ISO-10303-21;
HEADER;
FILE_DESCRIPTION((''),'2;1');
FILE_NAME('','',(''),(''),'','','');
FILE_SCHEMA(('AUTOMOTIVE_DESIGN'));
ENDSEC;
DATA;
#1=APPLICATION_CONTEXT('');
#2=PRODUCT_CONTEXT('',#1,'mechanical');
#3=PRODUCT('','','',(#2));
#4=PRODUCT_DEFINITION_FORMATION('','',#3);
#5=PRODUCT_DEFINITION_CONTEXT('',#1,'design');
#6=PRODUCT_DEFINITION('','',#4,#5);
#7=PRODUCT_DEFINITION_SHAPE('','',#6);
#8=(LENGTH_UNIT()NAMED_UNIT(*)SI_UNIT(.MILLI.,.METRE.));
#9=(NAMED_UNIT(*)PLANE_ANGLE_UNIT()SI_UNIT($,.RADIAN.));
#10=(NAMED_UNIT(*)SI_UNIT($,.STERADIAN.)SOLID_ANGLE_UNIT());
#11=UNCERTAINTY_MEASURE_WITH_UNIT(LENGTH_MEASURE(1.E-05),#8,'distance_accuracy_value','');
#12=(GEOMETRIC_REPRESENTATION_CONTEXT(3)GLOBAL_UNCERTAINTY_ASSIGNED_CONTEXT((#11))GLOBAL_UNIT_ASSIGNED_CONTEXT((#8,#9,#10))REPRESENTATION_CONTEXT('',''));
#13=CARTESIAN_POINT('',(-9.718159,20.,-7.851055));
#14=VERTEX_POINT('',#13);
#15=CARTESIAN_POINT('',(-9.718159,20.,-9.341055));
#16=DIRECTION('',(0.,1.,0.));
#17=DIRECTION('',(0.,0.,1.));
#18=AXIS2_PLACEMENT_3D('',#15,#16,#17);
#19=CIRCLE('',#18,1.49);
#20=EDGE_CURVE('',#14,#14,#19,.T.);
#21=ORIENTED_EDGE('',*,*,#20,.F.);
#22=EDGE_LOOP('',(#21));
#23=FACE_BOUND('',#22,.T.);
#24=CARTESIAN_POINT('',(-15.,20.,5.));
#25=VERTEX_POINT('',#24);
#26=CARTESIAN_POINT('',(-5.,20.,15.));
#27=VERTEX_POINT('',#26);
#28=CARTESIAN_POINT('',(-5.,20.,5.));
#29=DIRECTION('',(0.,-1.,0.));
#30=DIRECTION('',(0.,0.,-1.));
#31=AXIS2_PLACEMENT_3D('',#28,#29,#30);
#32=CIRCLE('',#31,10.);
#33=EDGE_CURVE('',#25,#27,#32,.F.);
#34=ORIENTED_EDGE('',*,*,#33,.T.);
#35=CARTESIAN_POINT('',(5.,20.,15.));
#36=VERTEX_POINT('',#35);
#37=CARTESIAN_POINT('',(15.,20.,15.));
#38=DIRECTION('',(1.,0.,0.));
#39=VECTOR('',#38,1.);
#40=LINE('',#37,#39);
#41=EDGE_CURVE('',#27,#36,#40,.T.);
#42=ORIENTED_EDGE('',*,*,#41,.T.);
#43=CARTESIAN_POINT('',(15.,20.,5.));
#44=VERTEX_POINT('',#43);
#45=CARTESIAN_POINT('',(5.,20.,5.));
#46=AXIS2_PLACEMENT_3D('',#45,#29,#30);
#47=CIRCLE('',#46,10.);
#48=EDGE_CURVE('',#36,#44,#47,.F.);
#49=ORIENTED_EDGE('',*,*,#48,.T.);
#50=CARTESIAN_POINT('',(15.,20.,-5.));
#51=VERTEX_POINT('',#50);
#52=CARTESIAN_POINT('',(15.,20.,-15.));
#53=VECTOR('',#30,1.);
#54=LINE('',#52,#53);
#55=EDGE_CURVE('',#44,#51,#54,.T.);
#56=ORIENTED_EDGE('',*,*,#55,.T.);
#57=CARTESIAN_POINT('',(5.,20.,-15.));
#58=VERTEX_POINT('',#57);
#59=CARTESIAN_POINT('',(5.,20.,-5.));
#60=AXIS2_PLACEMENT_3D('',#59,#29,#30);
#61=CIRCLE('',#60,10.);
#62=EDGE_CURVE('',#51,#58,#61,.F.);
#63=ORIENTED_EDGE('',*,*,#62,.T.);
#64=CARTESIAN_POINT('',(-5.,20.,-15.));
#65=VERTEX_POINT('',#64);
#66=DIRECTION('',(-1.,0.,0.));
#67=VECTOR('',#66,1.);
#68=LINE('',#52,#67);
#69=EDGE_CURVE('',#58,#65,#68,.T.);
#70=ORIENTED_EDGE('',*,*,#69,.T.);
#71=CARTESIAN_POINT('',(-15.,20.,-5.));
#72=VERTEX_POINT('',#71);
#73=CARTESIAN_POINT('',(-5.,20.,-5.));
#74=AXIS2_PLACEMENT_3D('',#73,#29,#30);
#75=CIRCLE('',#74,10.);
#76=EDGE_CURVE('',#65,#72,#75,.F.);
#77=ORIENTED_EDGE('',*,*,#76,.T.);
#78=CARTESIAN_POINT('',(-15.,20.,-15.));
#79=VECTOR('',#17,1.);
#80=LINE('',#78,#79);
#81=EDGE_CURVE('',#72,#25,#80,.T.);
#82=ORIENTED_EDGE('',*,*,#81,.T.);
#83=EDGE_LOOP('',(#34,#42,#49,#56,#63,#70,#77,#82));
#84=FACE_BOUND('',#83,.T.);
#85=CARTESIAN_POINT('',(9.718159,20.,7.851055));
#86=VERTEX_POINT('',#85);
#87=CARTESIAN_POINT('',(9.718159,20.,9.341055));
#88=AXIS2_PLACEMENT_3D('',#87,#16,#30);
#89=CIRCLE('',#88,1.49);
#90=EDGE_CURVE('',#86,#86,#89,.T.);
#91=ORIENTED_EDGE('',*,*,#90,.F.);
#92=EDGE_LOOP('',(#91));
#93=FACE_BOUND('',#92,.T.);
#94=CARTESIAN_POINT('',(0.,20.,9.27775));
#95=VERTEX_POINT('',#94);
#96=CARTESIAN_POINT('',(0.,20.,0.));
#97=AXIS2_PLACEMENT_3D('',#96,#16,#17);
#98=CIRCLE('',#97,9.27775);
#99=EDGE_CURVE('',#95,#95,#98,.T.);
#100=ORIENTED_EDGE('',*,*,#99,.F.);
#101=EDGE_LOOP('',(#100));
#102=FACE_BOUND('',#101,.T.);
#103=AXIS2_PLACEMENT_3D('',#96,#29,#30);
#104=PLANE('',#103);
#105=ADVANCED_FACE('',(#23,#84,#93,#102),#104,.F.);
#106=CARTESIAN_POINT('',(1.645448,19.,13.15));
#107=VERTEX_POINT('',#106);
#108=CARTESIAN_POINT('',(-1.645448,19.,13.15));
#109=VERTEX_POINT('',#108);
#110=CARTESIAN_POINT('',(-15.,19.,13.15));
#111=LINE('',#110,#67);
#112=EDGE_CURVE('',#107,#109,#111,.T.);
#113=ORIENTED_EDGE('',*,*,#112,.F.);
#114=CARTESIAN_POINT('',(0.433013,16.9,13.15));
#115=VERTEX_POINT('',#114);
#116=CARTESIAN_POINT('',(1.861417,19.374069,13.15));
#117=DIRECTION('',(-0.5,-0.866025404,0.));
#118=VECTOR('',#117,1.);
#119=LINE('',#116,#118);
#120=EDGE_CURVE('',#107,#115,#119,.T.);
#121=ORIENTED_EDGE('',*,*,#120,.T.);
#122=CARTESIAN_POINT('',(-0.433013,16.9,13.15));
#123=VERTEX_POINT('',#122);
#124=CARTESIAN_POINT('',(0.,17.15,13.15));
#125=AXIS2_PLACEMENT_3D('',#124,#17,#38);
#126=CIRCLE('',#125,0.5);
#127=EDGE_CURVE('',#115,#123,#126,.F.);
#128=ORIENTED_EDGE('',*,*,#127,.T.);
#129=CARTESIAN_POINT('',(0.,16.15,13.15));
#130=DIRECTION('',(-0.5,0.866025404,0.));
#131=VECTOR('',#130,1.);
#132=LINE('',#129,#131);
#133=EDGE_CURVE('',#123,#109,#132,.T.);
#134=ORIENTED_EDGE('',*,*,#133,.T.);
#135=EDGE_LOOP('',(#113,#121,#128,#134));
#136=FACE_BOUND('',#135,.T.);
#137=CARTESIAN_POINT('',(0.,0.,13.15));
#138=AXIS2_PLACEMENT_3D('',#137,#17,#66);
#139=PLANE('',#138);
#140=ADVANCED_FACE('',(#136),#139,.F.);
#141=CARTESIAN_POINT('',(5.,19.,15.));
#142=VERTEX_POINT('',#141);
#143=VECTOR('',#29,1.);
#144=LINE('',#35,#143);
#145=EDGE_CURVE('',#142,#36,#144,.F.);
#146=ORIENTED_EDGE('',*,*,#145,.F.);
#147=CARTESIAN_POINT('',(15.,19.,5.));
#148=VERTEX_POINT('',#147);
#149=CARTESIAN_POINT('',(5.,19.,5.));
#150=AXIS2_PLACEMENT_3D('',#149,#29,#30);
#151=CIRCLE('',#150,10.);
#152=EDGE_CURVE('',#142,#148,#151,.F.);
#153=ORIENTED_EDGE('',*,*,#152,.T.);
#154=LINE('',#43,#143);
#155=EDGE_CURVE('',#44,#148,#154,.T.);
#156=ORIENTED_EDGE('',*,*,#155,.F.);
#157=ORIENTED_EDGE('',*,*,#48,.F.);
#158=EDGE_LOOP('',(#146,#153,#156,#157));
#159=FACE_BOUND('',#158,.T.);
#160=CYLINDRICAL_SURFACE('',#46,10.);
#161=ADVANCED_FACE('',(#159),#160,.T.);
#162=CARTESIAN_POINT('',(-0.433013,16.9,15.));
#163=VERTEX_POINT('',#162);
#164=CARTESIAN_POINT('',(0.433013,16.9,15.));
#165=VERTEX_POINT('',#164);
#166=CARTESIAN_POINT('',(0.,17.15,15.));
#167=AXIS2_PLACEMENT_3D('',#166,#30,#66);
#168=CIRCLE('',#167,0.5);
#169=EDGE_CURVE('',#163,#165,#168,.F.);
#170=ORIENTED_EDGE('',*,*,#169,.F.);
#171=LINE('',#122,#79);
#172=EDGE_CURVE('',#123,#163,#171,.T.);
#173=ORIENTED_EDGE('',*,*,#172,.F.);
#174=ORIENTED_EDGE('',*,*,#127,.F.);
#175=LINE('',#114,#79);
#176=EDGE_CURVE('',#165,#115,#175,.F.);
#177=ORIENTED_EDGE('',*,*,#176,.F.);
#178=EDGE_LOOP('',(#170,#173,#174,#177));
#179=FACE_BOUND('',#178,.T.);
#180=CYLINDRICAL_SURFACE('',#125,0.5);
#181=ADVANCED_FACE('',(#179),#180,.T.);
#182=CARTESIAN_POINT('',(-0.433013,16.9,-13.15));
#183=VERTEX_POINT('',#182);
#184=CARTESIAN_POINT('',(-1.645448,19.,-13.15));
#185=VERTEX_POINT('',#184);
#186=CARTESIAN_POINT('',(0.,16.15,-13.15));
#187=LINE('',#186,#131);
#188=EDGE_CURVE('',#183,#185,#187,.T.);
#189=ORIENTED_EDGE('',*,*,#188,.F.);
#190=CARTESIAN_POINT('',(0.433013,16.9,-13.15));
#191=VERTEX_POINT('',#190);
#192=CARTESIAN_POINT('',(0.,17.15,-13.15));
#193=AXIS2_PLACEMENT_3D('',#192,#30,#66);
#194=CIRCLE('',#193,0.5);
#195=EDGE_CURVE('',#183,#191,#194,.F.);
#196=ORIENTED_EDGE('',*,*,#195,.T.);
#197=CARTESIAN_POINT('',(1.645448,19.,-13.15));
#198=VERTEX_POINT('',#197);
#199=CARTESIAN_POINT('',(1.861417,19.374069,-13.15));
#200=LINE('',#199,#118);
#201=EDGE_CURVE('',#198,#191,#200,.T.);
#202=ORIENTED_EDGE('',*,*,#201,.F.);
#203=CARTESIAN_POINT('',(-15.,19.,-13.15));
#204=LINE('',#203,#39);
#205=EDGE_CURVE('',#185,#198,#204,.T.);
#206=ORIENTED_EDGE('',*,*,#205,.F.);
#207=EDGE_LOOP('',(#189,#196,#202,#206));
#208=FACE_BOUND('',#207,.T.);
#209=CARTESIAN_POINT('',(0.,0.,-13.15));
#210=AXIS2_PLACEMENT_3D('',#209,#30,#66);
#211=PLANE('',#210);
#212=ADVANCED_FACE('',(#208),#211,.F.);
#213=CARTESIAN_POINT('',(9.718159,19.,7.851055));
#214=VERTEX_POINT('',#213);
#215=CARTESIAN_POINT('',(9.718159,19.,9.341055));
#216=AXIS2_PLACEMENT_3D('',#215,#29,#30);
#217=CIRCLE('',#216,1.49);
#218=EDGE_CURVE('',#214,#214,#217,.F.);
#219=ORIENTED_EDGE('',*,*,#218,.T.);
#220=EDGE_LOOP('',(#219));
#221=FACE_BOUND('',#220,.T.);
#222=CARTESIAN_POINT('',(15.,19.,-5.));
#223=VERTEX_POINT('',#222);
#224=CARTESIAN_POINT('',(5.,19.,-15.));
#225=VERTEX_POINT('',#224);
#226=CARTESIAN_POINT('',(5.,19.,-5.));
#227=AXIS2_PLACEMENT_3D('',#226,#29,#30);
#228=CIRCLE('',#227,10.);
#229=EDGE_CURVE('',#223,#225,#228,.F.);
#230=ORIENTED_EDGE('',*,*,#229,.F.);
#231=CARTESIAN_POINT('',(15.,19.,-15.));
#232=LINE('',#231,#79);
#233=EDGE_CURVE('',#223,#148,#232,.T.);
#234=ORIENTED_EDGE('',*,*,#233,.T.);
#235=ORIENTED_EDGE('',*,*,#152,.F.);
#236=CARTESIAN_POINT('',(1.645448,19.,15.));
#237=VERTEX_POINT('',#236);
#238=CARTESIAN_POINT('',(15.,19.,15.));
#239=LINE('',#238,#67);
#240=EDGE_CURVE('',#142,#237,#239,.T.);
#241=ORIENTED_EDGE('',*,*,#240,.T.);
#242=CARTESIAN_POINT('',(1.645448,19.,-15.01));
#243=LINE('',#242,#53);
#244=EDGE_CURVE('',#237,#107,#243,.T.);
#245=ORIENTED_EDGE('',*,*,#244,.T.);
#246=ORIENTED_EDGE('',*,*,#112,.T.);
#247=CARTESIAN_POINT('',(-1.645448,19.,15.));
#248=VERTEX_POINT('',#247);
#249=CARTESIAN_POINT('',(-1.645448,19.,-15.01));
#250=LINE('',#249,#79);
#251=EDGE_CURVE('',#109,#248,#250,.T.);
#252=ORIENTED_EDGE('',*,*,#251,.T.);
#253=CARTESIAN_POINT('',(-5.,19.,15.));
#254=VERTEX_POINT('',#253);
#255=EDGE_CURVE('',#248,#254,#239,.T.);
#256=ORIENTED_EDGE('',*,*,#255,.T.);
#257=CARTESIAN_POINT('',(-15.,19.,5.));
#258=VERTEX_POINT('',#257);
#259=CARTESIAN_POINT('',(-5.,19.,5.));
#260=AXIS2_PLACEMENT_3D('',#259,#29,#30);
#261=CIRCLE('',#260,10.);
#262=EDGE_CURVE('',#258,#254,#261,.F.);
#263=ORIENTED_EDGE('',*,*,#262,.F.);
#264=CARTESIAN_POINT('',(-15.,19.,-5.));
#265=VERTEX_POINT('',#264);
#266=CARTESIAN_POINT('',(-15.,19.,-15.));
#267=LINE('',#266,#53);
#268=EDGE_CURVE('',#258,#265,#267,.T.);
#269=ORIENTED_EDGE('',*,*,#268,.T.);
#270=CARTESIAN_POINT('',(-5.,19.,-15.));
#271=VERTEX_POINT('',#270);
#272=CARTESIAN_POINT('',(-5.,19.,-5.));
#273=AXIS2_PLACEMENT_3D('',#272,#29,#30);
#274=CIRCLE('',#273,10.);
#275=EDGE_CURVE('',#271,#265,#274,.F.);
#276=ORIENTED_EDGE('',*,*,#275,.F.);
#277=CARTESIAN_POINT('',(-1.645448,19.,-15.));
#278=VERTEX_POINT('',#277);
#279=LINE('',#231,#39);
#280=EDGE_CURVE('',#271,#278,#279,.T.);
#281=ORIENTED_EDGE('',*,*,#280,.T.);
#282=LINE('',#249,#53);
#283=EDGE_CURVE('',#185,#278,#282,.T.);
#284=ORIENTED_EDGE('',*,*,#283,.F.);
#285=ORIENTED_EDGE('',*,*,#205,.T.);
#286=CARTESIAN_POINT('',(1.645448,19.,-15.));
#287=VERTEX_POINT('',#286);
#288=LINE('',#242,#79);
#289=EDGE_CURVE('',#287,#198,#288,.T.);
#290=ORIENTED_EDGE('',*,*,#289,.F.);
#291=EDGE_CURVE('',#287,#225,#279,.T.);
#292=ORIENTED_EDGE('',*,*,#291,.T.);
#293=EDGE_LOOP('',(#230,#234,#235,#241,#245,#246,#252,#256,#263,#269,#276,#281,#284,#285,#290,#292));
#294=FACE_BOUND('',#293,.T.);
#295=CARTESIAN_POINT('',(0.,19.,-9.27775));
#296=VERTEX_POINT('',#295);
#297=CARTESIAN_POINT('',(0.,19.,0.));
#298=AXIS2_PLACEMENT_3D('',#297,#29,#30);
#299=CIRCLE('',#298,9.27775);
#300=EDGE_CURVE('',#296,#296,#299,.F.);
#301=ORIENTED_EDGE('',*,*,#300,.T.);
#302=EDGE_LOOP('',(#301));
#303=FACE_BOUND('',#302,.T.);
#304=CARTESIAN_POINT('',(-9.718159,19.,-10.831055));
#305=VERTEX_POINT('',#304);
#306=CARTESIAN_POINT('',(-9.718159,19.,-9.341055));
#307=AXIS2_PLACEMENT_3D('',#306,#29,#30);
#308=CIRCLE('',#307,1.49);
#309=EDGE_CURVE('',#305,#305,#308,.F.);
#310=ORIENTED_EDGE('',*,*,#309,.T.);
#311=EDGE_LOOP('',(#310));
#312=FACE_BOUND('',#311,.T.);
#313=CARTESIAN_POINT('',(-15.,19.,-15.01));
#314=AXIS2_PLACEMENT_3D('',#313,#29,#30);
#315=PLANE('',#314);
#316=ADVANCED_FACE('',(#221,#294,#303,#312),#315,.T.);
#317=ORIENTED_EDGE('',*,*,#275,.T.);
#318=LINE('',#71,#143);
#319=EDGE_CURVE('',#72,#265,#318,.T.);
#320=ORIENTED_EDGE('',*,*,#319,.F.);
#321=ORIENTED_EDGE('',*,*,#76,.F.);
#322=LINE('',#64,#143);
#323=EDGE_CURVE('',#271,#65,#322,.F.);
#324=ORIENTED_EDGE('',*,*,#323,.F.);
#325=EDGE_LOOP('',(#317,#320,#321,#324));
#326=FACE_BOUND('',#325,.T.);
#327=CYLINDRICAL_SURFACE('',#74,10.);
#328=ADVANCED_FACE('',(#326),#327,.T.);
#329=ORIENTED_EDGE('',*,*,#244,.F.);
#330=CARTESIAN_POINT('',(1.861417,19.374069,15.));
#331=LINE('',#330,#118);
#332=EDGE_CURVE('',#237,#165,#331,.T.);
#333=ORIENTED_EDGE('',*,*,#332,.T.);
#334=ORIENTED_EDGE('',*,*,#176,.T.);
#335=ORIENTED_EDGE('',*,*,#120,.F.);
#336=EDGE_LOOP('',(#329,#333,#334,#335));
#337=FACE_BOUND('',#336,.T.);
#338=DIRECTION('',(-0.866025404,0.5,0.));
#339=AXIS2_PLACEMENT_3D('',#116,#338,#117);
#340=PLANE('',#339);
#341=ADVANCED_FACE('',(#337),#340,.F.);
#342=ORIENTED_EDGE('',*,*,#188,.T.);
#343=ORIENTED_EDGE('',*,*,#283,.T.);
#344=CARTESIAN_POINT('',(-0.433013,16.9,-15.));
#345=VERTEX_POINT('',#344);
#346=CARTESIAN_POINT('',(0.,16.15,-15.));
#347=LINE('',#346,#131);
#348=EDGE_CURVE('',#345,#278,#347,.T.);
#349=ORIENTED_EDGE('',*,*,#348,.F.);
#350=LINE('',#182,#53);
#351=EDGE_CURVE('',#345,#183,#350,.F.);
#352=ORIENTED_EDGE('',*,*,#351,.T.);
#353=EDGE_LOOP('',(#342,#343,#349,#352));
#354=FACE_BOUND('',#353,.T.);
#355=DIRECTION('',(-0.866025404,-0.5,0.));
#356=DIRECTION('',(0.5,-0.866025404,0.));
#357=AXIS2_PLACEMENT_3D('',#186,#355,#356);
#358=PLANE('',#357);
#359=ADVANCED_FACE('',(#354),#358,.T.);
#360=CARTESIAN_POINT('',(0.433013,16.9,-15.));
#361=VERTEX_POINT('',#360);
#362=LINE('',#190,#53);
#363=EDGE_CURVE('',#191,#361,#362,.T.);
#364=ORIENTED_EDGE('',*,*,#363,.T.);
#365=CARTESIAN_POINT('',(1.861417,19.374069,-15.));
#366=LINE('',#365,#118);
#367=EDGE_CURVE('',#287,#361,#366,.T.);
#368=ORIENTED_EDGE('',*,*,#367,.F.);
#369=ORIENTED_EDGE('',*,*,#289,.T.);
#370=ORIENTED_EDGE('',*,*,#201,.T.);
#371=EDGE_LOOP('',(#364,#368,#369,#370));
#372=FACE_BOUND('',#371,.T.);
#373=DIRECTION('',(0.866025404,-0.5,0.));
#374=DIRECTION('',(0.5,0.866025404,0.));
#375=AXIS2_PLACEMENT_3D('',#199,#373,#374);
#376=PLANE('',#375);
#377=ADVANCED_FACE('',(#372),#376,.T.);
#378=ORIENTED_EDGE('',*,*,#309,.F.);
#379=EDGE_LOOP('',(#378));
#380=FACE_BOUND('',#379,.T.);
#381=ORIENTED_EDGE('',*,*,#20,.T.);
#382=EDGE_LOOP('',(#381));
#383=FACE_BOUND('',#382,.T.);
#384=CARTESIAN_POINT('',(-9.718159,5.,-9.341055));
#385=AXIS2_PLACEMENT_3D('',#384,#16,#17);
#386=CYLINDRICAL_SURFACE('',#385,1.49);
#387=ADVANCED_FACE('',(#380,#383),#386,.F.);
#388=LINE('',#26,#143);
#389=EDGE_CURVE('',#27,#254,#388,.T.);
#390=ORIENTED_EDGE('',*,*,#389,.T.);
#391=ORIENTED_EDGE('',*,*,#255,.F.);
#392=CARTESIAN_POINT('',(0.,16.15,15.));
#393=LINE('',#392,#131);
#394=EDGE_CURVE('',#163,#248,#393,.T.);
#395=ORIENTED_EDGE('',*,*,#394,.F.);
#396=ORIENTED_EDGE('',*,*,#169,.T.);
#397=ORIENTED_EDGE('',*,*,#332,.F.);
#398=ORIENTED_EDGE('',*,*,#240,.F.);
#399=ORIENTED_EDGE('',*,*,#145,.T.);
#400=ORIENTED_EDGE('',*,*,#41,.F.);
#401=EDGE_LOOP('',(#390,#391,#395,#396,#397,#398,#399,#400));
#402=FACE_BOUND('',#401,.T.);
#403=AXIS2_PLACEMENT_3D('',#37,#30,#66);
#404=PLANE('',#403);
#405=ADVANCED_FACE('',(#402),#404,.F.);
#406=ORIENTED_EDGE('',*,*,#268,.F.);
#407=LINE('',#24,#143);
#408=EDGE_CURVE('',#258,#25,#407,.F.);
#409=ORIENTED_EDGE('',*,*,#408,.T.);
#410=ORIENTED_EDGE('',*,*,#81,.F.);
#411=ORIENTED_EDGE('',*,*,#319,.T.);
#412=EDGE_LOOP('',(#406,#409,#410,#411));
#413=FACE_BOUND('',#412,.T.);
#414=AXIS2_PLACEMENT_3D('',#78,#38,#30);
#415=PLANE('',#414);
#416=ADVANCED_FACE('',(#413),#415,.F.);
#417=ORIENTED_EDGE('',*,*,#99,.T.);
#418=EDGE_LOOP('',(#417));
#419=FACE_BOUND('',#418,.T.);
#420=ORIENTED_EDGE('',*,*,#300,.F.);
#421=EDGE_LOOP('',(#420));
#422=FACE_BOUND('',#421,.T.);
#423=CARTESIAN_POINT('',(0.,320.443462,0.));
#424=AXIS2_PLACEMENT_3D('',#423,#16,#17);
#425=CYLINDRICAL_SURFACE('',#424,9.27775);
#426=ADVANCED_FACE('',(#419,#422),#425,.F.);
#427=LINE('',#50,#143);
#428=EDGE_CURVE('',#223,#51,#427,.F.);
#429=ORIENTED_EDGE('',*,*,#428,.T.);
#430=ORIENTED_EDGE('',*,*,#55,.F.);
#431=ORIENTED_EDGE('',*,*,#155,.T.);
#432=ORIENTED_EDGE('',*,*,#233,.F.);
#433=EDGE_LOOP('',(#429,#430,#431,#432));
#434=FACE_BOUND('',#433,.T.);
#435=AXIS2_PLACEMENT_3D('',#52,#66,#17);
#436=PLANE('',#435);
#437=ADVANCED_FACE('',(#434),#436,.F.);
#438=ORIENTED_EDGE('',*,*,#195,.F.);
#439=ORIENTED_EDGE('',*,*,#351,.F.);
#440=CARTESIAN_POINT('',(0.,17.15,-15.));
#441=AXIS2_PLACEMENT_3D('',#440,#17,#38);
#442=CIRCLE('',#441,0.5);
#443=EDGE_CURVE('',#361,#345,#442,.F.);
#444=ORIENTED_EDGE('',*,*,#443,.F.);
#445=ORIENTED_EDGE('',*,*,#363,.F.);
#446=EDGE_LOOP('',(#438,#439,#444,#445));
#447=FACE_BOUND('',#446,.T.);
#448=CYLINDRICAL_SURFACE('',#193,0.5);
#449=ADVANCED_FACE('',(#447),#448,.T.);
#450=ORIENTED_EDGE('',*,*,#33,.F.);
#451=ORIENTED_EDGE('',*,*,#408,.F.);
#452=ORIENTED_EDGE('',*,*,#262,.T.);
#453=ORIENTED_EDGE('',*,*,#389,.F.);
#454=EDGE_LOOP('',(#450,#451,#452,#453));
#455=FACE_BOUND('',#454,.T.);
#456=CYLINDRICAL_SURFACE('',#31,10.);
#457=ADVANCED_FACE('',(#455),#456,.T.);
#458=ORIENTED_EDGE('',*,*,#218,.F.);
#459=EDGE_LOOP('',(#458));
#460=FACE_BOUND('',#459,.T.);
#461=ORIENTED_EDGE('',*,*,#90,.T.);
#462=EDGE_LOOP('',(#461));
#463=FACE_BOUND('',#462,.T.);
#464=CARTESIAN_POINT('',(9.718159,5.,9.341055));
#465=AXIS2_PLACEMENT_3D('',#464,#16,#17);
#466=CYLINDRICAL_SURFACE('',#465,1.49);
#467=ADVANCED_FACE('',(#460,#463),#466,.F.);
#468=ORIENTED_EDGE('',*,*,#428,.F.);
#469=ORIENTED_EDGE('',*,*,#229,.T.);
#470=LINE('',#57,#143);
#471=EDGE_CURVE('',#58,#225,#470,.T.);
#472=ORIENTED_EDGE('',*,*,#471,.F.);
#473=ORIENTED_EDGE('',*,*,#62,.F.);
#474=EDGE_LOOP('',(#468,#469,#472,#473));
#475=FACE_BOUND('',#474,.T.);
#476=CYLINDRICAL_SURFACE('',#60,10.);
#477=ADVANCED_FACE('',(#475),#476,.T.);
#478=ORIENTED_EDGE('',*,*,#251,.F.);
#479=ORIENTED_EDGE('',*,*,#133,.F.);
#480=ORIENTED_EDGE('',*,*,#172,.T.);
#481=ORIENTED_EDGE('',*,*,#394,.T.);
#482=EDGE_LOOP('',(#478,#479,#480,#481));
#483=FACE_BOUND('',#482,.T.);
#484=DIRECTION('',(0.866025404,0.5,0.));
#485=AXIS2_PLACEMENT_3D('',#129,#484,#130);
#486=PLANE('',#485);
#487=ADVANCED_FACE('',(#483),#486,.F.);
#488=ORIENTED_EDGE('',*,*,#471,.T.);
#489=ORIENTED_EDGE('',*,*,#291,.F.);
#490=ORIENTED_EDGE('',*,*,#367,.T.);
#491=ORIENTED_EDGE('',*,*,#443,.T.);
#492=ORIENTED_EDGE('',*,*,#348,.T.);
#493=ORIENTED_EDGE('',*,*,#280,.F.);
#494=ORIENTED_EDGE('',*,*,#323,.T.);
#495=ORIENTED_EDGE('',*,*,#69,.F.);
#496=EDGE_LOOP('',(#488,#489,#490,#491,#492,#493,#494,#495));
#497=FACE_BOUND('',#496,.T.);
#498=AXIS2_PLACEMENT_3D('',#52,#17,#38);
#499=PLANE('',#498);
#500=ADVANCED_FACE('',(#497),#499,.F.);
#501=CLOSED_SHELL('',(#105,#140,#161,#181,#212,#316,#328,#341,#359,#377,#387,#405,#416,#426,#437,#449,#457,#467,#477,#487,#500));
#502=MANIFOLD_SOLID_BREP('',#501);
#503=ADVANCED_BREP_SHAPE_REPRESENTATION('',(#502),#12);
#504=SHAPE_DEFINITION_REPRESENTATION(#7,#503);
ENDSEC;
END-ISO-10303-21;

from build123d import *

# Parameters (mm, degrees)
BASISTEIL_MOLDINGFORMUMRELLAV1_0_0_SAK_1_START = 19
BASISTEIL_MOLDINGFORMUMRELLAV1_0_0_S_2_R       = 1.49
BASISTEIL_MOLDINGFORMUMRELLAV1_0_0_S_2_R_2     = 9.27775
BASISTEIL_MOLDINGFORMUMRELLAV1_0_0_SAK_1_DEPTH = 1
AUFSATZ_LINEAR_AUSTRAGEN1_DEPTH                = 1.85
VERRUNDUNG1_R                                  = 0.5


# Read off the part's stored shape, not the designer's step: Basisteil-MoldingFormUmrellaV1_0_0_SAK-1
with BuildPart() as part:
    # Basisteil-MoldingFormUmrellaV1_0_0_S 2 → Basisteil-MoldingFormUmrellaV1_0_0_SAK-1 (new body)
    with BuildSketch(Plane(origin=(0, 0, 0), x_dir=(1, 0, 0), z_dir=(0, 1, 0)).offset(BASISTEIL_MOLDINGFORMUMRELLAV1_0_0_SAK_1_START)):
        with BuildLine():
            Line((5, 15), (-5, 15))
            ThreePointArc((-5, 15), (-12.071067812, 12.071067812), (-15, 5))
            Line((-15, 5), (-15, -5))
            ThreePointArc((-15, -5), (-12.071067812, -12.071067812), (-5, -15))
            Line((-5, -15), (5, -15))
            ThreePointArc((5, -15), (12.071067812, -12.071067812), (15, -5))
            Line((15, -5), (15, 5))
            ThreePointArc((15, 5), (12.071067812, 12.071067812), (5, 15))
        make_face()
        with Locations((9.718159066, -9.341055177)):
            Circle(BASISTEIL_MOLDINGFORMUMRELLAV1_0_0_S_2_R, mode=Mode.SUBTRACT)
        with Locations((-9.718159066, 9.341055177)):
            Circle(BASISTEIL_MOLDINGFORMUMRELLAV1_0_0_S_2_R, mode=Mode.SUBTRACT)
        Circle(BASISTEIL_MOLDINGFORMUMRELLAV1_0_0_S_2_R_2, mode=Mode.SUBTRACT)
    extrude(amount=BASISTEIL_MOLDINGFORMUMRELLAV1_0_0_SAK_1_DEPTH)

    # Skizze1 → Aufsatz-Linear austragen1 (add)
    with BuildSketch(Plane(origin=(0, 0, -15), x_dir=(-1, 0, 0), z_dir=(0, 0, -1))):
        Polygon((0, 16.15), (1.861417329, 19.374069389), (-1.861417329, 19.374069389), align=None)
    aufsatz_linear_austragen1 = extrude(amount=-AUFSATZ_LINEAR_AUSTRAGEN1_DEPTH)

    # Spiegeln1: Aufsatz-Linear austragen1 across plane
    add(aufsatz_linear_austragen1.mirror(Plane(origin=(0, 0, 0), x_dir=(1, 0, 0), z_dir=(0, 0, -1))))

    # Verrundung1
    verrundung1_edges = [part.edges().sort_by_distance(p)[0] for p in [
        (0, 16.15, -14.075),
        (0, 16.15, 14.075),
    ]]
    fillet(verrundung1_edges, radius=VERRUNDUNG1_R)


solid = part.part
